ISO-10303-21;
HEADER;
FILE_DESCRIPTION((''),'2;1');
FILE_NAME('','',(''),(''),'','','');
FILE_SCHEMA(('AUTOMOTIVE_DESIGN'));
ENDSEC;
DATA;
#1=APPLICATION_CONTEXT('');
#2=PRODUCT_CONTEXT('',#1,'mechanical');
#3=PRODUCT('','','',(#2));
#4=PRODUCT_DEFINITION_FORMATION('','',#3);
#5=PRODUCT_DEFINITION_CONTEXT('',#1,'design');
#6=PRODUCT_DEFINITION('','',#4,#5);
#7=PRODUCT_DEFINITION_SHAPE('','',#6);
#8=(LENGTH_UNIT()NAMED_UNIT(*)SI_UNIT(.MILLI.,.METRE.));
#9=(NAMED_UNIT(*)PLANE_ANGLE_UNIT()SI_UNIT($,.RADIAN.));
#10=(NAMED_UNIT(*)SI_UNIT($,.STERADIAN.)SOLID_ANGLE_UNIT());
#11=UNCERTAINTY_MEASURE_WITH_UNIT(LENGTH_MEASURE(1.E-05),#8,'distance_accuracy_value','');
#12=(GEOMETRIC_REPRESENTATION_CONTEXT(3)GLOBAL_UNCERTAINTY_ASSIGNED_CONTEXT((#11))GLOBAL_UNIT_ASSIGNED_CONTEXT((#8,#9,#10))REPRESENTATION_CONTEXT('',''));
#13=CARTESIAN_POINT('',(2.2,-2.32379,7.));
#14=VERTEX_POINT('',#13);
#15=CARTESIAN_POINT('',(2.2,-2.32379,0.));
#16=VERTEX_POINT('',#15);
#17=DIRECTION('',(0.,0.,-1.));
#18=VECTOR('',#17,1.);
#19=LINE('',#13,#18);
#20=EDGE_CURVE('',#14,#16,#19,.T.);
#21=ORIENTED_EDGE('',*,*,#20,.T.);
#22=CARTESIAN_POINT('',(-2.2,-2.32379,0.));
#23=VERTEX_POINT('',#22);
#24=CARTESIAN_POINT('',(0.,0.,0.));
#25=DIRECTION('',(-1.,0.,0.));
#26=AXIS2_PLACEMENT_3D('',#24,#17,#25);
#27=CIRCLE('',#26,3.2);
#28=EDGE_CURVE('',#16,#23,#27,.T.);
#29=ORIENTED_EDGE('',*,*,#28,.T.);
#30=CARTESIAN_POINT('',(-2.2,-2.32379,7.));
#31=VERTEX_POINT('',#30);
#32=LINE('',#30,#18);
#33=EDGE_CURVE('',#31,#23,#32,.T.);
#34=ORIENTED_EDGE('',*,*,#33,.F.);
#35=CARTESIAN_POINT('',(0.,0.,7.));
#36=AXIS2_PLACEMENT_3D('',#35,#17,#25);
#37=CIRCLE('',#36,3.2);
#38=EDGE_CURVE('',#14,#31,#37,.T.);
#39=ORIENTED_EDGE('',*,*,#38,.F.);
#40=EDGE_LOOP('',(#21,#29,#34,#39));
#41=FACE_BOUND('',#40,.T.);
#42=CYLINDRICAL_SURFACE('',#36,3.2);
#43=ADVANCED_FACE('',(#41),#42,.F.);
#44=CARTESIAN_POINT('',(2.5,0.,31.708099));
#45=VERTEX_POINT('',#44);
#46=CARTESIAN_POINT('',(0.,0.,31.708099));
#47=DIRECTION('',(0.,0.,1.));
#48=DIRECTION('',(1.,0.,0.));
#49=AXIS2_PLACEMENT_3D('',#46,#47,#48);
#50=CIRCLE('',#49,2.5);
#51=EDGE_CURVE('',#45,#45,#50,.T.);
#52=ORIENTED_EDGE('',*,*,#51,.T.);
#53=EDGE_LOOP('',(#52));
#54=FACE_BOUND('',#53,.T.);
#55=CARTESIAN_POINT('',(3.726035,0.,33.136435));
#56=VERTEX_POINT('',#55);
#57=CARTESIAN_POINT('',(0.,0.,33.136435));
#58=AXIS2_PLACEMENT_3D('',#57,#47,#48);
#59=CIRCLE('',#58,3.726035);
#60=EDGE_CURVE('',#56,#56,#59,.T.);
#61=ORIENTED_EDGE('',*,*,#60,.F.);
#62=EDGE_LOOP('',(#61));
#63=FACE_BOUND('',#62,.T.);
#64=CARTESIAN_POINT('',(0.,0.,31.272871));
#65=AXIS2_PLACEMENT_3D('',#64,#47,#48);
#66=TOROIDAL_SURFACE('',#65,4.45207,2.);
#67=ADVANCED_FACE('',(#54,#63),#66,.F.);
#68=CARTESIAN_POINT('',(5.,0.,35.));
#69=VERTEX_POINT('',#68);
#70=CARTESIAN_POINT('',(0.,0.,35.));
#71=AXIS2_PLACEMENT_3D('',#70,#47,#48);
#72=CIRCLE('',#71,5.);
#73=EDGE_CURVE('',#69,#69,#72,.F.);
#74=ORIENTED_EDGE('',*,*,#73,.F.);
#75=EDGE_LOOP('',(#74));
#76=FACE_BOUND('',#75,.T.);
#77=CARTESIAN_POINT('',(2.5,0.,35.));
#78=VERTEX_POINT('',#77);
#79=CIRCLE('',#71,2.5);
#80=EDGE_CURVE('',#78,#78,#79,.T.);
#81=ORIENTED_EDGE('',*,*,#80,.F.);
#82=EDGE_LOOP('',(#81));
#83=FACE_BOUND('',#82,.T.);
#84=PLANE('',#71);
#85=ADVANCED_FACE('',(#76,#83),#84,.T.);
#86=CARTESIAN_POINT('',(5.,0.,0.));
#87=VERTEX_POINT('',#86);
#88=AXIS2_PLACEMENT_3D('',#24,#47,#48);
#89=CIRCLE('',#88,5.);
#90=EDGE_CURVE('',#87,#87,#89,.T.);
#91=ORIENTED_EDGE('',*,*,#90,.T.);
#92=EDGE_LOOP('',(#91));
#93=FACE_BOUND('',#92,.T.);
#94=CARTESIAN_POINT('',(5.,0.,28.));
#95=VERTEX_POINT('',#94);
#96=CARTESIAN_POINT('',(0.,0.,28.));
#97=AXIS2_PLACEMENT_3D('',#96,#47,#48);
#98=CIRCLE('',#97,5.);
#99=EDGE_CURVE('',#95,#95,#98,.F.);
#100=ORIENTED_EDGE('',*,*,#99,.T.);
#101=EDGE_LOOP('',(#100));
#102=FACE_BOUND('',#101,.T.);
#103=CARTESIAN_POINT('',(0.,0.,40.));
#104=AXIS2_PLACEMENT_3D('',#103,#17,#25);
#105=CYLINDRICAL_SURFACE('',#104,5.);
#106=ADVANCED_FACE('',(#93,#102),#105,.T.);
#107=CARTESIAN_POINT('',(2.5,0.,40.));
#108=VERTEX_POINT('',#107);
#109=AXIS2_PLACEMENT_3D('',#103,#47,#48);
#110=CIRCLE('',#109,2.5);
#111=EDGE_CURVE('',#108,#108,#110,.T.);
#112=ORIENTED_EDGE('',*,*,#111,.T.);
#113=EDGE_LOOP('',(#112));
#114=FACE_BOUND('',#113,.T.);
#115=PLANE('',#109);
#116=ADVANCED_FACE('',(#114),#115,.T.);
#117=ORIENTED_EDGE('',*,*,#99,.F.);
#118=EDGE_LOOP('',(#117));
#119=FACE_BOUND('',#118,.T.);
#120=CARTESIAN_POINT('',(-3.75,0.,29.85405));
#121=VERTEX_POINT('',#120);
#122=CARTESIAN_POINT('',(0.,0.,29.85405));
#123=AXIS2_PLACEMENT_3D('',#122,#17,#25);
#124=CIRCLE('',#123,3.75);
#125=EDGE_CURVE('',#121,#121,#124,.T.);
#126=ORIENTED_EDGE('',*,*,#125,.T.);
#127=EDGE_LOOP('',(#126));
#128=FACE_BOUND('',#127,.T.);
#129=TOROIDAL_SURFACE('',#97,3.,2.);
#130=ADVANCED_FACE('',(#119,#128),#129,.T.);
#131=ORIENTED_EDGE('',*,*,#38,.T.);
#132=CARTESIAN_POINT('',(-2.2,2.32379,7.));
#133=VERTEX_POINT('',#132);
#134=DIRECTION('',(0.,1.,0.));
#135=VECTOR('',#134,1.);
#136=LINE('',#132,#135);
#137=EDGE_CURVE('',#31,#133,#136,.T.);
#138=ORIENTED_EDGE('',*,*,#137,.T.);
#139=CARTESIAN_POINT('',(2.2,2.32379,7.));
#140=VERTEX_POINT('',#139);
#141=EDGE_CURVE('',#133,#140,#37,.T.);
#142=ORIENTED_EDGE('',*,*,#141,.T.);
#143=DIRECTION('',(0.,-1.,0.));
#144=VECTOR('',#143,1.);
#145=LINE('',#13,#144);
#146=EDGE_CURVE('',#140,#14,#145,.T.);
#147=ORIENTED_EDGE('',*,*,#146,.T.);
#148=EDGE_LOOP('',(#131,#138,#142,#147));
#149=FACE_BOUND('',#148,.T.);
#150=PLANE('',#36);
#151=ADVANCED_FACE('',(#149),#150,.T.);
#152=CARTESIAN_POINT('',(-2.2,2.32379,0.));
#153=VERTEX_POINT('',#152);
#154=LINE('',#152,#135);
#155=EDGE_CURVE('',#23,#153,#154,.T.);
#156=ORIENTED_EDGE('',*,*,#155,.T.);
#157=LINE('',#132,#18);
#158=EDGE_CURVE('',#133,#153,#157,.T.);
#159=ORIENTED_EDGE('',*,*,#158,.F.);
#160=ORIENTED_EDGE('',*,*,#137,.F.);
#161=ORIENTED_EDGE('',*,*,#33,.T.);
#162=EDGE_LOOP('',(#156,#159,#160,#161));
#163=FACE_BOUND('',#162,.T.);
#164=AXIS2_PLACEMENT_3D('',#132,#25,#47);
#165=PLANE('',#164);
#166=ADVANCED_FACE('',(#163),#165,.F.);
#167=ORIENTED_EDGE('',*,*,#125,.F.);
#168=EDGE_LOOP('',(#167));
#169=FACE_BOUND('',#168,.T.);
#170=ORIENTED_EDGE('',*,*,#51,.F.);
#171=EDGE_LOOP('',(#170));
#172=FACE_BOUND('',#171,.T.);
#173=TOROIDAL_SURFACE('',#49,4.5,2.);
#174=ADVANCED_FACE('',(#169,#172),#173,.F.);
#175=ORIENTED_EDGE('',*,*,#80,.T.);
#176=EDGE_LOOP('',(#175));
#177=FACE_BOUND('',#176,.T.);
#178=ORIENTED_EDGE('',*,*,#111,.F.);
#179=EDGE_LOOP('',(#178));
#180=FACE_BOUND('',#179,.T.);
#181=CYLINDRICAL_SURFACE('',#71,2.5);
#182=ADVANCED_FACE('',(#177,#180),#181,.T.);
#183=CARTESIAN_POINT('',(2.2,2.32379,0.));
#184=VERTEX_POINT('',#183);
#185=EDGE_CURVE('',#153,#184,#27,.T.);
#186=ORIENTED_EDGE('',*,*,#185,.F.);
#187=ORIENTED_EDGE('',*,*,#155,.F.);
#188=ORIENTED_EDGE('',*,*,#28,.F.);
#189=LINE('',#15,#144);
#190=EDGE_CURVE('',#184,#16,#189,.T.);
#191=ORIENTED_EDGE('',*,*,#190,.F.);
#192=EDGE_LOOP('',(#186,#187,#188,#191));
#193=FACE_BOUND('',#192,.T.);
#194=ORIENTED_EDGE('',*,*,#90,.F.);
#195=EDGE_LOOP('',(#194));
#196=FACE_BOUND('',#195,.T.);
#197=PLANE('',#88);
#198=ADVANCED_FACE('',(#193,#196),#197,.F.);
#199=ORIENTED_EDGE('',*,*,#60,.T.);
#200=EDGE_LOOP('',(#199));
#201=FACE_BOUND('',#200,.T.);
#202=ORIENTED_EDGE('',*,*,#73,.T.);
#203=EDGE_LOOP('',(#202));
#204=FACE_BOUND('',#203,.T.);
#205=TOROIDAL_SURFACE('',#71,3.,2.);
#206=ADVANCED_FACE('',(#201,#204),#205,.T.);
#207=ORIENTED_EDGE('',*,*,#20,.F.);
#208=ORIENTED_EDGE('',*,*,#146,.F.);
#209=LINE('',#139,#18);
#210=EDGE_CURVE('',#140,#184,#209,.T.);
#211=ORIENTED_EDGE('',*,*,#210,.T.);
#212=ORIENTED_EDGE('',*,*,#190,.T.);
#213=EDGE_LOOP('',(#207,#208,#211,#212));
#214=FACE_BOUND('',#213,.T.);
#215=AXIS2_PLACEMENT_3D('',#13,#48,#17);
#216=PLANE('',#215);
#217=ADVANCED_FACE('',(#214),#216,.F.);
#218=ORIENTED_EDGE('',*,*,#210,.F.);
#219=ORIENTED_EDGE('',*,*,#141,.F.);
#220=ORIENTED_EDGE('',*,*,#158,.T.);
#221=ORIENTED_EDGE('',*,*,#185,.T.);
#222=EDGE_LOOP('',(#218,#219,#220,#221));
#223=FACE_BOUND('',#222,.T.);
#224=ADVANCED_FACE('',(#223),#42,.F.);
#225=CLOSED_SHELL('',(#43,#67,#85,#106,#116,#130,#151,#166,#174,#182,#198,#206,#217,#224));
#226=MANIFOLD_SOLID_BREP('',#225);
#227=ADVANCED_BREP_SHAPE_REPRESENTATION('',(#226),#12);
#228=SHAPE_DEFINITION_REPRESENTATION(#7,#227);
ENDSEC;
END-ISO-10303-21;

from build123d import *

# Parameters (mm, degrees)
SKETCH_1_R          = 5
EXTRUDE_1_DEPTH     = 40
CUT_EXTRUDE_1_DEPTH = 7
SKETCH_4_R          = 6.5
SKETCH_4_R_2        = 2.5
CUT_EXTRUDE_4_DEPTH = 10
EXTRUDE_START       = -7
SKETCH_7_R          = 5
EXTRUDE_2_DEPTH     = 7
SKETCH_10_R         = 6.5
SKETCH_10_R_2       = 2.5
CUT_EXTRUDE_5_DEPTH = 5
FILLET_3_R          = 2
FILLET_4_R          = 2
FILLET_5_R          = 2


with BuildPart() as part:
    # Эскиз1 → Бобышка-Вытянуть1 (new body)
    with BuildSketch(Plane.XY):
        Circle(SKETCH_1_R)
    extrude(amount=EXTRUDE_1_DEPTH)

    # Эскиз3 → Вырез-Вытянуть1 (cut)
    with BuildSketch(Plane(origin=(0, 0, 0), x_dir=(-1, 0, 0), z_dir=(0, 0, -1))):
        with BuildLine():
            Line((-2.2, -2.323790008), (-2.2, 2.323790008))
            ThreePointArc((-2.2, 2.323790008), (0, 3.2), (2.2, 2.323790008))
            Line((2.2, 2.323790008), (2.2, -2.323790008))
            ThreePointArc((2.2, -2.323790008), (0, -3.2), (-2.2, -2.323790008))
        make_face()
    extrude(amount=-CUT_EXTRUDE_1_DEPTH, mode=Mode.SUBTRACT)

    # Эскиз4 → Вырез-Вытянуть-Тонкостенный4 (cut)
    with BuildSketch(Plane.XY.offset(40)):
        Circle(SKETCH_4_R)
        Circle(SKETCH_4_R_2, mode=Mode.SUBTRACT)
    extrude(amount=-CUT_EXTRUDE_4_DEPTH, mode=Mode.SUBTRACT)

    # Эскиз7 → Бобышка-Вытянуть2 (add)
    with BuildSketch(Plane.XY.offset(40).offset(EXTRUDE_START)):
        Circle(SKETCH_7_R)
    extrude(amount=EXTRUDE_2_DEPTH)

    # Эскиз10 → Вырез-Вытянуть-Тонкостенный5 (cut)
    with BuildSketch(Plane.XY.offset(40)):
        Circle(SKETCH_10_R)
        Circle(SKETCH_10_R_2, mode=Mode.SUBTRACT)
    extrude(amount=-CUT_EXTRUDE_5_DEPTH, mode=Mode.SUBTRACT)

    # Скругление3
    fillet_3_edges = [part.edges().sort_by_distance(p)[0] for p in [
        (-5, 0, 30),
    ]]
    fillet(fillet_3_edges, radius=FILLET_3_R)

    # Скругление4
    fillet_4_edges = [part.edges().sort_by_distance(p)[0] for p in [
        (-5, 0, 33),
    ]]
    fillet(fillet_4_edges, radius=FILLET_4_R - 0.0001)  # a hair under: the kernel refuses the full size

    # Скругление5
    fillet_5_edges = [part.edges().sort_by_distance(p)[0] for p in [
        (-2.5, 0, 30),
    ]]
    fillet(fillet_5_edges, radius=FILLET_5_R)

    # Скругление6: read off the stored shape, not the designer's step
    # Скругление6 outline → Скругление6 (revolve)
    with BuildSketch(Plane.XZ):
        with BuildLine():
            Line((3.726034838, 33.136435294), (3, 33.136435294))
            Line((3, 33.136435294), (3, 33))
            Line((3, 33), (2.5, 33))
            Line((2.5, 33), (2.5, 31.708099244))
            ThreePointArc((2.5, 31.708099244), (2.934473908, 32.575522915), (3.726034838, 33.136435294))
        make_face()
    revolve(axis=Axis((0, 0, 0), (0, 0, 1)))


solid = part.part
